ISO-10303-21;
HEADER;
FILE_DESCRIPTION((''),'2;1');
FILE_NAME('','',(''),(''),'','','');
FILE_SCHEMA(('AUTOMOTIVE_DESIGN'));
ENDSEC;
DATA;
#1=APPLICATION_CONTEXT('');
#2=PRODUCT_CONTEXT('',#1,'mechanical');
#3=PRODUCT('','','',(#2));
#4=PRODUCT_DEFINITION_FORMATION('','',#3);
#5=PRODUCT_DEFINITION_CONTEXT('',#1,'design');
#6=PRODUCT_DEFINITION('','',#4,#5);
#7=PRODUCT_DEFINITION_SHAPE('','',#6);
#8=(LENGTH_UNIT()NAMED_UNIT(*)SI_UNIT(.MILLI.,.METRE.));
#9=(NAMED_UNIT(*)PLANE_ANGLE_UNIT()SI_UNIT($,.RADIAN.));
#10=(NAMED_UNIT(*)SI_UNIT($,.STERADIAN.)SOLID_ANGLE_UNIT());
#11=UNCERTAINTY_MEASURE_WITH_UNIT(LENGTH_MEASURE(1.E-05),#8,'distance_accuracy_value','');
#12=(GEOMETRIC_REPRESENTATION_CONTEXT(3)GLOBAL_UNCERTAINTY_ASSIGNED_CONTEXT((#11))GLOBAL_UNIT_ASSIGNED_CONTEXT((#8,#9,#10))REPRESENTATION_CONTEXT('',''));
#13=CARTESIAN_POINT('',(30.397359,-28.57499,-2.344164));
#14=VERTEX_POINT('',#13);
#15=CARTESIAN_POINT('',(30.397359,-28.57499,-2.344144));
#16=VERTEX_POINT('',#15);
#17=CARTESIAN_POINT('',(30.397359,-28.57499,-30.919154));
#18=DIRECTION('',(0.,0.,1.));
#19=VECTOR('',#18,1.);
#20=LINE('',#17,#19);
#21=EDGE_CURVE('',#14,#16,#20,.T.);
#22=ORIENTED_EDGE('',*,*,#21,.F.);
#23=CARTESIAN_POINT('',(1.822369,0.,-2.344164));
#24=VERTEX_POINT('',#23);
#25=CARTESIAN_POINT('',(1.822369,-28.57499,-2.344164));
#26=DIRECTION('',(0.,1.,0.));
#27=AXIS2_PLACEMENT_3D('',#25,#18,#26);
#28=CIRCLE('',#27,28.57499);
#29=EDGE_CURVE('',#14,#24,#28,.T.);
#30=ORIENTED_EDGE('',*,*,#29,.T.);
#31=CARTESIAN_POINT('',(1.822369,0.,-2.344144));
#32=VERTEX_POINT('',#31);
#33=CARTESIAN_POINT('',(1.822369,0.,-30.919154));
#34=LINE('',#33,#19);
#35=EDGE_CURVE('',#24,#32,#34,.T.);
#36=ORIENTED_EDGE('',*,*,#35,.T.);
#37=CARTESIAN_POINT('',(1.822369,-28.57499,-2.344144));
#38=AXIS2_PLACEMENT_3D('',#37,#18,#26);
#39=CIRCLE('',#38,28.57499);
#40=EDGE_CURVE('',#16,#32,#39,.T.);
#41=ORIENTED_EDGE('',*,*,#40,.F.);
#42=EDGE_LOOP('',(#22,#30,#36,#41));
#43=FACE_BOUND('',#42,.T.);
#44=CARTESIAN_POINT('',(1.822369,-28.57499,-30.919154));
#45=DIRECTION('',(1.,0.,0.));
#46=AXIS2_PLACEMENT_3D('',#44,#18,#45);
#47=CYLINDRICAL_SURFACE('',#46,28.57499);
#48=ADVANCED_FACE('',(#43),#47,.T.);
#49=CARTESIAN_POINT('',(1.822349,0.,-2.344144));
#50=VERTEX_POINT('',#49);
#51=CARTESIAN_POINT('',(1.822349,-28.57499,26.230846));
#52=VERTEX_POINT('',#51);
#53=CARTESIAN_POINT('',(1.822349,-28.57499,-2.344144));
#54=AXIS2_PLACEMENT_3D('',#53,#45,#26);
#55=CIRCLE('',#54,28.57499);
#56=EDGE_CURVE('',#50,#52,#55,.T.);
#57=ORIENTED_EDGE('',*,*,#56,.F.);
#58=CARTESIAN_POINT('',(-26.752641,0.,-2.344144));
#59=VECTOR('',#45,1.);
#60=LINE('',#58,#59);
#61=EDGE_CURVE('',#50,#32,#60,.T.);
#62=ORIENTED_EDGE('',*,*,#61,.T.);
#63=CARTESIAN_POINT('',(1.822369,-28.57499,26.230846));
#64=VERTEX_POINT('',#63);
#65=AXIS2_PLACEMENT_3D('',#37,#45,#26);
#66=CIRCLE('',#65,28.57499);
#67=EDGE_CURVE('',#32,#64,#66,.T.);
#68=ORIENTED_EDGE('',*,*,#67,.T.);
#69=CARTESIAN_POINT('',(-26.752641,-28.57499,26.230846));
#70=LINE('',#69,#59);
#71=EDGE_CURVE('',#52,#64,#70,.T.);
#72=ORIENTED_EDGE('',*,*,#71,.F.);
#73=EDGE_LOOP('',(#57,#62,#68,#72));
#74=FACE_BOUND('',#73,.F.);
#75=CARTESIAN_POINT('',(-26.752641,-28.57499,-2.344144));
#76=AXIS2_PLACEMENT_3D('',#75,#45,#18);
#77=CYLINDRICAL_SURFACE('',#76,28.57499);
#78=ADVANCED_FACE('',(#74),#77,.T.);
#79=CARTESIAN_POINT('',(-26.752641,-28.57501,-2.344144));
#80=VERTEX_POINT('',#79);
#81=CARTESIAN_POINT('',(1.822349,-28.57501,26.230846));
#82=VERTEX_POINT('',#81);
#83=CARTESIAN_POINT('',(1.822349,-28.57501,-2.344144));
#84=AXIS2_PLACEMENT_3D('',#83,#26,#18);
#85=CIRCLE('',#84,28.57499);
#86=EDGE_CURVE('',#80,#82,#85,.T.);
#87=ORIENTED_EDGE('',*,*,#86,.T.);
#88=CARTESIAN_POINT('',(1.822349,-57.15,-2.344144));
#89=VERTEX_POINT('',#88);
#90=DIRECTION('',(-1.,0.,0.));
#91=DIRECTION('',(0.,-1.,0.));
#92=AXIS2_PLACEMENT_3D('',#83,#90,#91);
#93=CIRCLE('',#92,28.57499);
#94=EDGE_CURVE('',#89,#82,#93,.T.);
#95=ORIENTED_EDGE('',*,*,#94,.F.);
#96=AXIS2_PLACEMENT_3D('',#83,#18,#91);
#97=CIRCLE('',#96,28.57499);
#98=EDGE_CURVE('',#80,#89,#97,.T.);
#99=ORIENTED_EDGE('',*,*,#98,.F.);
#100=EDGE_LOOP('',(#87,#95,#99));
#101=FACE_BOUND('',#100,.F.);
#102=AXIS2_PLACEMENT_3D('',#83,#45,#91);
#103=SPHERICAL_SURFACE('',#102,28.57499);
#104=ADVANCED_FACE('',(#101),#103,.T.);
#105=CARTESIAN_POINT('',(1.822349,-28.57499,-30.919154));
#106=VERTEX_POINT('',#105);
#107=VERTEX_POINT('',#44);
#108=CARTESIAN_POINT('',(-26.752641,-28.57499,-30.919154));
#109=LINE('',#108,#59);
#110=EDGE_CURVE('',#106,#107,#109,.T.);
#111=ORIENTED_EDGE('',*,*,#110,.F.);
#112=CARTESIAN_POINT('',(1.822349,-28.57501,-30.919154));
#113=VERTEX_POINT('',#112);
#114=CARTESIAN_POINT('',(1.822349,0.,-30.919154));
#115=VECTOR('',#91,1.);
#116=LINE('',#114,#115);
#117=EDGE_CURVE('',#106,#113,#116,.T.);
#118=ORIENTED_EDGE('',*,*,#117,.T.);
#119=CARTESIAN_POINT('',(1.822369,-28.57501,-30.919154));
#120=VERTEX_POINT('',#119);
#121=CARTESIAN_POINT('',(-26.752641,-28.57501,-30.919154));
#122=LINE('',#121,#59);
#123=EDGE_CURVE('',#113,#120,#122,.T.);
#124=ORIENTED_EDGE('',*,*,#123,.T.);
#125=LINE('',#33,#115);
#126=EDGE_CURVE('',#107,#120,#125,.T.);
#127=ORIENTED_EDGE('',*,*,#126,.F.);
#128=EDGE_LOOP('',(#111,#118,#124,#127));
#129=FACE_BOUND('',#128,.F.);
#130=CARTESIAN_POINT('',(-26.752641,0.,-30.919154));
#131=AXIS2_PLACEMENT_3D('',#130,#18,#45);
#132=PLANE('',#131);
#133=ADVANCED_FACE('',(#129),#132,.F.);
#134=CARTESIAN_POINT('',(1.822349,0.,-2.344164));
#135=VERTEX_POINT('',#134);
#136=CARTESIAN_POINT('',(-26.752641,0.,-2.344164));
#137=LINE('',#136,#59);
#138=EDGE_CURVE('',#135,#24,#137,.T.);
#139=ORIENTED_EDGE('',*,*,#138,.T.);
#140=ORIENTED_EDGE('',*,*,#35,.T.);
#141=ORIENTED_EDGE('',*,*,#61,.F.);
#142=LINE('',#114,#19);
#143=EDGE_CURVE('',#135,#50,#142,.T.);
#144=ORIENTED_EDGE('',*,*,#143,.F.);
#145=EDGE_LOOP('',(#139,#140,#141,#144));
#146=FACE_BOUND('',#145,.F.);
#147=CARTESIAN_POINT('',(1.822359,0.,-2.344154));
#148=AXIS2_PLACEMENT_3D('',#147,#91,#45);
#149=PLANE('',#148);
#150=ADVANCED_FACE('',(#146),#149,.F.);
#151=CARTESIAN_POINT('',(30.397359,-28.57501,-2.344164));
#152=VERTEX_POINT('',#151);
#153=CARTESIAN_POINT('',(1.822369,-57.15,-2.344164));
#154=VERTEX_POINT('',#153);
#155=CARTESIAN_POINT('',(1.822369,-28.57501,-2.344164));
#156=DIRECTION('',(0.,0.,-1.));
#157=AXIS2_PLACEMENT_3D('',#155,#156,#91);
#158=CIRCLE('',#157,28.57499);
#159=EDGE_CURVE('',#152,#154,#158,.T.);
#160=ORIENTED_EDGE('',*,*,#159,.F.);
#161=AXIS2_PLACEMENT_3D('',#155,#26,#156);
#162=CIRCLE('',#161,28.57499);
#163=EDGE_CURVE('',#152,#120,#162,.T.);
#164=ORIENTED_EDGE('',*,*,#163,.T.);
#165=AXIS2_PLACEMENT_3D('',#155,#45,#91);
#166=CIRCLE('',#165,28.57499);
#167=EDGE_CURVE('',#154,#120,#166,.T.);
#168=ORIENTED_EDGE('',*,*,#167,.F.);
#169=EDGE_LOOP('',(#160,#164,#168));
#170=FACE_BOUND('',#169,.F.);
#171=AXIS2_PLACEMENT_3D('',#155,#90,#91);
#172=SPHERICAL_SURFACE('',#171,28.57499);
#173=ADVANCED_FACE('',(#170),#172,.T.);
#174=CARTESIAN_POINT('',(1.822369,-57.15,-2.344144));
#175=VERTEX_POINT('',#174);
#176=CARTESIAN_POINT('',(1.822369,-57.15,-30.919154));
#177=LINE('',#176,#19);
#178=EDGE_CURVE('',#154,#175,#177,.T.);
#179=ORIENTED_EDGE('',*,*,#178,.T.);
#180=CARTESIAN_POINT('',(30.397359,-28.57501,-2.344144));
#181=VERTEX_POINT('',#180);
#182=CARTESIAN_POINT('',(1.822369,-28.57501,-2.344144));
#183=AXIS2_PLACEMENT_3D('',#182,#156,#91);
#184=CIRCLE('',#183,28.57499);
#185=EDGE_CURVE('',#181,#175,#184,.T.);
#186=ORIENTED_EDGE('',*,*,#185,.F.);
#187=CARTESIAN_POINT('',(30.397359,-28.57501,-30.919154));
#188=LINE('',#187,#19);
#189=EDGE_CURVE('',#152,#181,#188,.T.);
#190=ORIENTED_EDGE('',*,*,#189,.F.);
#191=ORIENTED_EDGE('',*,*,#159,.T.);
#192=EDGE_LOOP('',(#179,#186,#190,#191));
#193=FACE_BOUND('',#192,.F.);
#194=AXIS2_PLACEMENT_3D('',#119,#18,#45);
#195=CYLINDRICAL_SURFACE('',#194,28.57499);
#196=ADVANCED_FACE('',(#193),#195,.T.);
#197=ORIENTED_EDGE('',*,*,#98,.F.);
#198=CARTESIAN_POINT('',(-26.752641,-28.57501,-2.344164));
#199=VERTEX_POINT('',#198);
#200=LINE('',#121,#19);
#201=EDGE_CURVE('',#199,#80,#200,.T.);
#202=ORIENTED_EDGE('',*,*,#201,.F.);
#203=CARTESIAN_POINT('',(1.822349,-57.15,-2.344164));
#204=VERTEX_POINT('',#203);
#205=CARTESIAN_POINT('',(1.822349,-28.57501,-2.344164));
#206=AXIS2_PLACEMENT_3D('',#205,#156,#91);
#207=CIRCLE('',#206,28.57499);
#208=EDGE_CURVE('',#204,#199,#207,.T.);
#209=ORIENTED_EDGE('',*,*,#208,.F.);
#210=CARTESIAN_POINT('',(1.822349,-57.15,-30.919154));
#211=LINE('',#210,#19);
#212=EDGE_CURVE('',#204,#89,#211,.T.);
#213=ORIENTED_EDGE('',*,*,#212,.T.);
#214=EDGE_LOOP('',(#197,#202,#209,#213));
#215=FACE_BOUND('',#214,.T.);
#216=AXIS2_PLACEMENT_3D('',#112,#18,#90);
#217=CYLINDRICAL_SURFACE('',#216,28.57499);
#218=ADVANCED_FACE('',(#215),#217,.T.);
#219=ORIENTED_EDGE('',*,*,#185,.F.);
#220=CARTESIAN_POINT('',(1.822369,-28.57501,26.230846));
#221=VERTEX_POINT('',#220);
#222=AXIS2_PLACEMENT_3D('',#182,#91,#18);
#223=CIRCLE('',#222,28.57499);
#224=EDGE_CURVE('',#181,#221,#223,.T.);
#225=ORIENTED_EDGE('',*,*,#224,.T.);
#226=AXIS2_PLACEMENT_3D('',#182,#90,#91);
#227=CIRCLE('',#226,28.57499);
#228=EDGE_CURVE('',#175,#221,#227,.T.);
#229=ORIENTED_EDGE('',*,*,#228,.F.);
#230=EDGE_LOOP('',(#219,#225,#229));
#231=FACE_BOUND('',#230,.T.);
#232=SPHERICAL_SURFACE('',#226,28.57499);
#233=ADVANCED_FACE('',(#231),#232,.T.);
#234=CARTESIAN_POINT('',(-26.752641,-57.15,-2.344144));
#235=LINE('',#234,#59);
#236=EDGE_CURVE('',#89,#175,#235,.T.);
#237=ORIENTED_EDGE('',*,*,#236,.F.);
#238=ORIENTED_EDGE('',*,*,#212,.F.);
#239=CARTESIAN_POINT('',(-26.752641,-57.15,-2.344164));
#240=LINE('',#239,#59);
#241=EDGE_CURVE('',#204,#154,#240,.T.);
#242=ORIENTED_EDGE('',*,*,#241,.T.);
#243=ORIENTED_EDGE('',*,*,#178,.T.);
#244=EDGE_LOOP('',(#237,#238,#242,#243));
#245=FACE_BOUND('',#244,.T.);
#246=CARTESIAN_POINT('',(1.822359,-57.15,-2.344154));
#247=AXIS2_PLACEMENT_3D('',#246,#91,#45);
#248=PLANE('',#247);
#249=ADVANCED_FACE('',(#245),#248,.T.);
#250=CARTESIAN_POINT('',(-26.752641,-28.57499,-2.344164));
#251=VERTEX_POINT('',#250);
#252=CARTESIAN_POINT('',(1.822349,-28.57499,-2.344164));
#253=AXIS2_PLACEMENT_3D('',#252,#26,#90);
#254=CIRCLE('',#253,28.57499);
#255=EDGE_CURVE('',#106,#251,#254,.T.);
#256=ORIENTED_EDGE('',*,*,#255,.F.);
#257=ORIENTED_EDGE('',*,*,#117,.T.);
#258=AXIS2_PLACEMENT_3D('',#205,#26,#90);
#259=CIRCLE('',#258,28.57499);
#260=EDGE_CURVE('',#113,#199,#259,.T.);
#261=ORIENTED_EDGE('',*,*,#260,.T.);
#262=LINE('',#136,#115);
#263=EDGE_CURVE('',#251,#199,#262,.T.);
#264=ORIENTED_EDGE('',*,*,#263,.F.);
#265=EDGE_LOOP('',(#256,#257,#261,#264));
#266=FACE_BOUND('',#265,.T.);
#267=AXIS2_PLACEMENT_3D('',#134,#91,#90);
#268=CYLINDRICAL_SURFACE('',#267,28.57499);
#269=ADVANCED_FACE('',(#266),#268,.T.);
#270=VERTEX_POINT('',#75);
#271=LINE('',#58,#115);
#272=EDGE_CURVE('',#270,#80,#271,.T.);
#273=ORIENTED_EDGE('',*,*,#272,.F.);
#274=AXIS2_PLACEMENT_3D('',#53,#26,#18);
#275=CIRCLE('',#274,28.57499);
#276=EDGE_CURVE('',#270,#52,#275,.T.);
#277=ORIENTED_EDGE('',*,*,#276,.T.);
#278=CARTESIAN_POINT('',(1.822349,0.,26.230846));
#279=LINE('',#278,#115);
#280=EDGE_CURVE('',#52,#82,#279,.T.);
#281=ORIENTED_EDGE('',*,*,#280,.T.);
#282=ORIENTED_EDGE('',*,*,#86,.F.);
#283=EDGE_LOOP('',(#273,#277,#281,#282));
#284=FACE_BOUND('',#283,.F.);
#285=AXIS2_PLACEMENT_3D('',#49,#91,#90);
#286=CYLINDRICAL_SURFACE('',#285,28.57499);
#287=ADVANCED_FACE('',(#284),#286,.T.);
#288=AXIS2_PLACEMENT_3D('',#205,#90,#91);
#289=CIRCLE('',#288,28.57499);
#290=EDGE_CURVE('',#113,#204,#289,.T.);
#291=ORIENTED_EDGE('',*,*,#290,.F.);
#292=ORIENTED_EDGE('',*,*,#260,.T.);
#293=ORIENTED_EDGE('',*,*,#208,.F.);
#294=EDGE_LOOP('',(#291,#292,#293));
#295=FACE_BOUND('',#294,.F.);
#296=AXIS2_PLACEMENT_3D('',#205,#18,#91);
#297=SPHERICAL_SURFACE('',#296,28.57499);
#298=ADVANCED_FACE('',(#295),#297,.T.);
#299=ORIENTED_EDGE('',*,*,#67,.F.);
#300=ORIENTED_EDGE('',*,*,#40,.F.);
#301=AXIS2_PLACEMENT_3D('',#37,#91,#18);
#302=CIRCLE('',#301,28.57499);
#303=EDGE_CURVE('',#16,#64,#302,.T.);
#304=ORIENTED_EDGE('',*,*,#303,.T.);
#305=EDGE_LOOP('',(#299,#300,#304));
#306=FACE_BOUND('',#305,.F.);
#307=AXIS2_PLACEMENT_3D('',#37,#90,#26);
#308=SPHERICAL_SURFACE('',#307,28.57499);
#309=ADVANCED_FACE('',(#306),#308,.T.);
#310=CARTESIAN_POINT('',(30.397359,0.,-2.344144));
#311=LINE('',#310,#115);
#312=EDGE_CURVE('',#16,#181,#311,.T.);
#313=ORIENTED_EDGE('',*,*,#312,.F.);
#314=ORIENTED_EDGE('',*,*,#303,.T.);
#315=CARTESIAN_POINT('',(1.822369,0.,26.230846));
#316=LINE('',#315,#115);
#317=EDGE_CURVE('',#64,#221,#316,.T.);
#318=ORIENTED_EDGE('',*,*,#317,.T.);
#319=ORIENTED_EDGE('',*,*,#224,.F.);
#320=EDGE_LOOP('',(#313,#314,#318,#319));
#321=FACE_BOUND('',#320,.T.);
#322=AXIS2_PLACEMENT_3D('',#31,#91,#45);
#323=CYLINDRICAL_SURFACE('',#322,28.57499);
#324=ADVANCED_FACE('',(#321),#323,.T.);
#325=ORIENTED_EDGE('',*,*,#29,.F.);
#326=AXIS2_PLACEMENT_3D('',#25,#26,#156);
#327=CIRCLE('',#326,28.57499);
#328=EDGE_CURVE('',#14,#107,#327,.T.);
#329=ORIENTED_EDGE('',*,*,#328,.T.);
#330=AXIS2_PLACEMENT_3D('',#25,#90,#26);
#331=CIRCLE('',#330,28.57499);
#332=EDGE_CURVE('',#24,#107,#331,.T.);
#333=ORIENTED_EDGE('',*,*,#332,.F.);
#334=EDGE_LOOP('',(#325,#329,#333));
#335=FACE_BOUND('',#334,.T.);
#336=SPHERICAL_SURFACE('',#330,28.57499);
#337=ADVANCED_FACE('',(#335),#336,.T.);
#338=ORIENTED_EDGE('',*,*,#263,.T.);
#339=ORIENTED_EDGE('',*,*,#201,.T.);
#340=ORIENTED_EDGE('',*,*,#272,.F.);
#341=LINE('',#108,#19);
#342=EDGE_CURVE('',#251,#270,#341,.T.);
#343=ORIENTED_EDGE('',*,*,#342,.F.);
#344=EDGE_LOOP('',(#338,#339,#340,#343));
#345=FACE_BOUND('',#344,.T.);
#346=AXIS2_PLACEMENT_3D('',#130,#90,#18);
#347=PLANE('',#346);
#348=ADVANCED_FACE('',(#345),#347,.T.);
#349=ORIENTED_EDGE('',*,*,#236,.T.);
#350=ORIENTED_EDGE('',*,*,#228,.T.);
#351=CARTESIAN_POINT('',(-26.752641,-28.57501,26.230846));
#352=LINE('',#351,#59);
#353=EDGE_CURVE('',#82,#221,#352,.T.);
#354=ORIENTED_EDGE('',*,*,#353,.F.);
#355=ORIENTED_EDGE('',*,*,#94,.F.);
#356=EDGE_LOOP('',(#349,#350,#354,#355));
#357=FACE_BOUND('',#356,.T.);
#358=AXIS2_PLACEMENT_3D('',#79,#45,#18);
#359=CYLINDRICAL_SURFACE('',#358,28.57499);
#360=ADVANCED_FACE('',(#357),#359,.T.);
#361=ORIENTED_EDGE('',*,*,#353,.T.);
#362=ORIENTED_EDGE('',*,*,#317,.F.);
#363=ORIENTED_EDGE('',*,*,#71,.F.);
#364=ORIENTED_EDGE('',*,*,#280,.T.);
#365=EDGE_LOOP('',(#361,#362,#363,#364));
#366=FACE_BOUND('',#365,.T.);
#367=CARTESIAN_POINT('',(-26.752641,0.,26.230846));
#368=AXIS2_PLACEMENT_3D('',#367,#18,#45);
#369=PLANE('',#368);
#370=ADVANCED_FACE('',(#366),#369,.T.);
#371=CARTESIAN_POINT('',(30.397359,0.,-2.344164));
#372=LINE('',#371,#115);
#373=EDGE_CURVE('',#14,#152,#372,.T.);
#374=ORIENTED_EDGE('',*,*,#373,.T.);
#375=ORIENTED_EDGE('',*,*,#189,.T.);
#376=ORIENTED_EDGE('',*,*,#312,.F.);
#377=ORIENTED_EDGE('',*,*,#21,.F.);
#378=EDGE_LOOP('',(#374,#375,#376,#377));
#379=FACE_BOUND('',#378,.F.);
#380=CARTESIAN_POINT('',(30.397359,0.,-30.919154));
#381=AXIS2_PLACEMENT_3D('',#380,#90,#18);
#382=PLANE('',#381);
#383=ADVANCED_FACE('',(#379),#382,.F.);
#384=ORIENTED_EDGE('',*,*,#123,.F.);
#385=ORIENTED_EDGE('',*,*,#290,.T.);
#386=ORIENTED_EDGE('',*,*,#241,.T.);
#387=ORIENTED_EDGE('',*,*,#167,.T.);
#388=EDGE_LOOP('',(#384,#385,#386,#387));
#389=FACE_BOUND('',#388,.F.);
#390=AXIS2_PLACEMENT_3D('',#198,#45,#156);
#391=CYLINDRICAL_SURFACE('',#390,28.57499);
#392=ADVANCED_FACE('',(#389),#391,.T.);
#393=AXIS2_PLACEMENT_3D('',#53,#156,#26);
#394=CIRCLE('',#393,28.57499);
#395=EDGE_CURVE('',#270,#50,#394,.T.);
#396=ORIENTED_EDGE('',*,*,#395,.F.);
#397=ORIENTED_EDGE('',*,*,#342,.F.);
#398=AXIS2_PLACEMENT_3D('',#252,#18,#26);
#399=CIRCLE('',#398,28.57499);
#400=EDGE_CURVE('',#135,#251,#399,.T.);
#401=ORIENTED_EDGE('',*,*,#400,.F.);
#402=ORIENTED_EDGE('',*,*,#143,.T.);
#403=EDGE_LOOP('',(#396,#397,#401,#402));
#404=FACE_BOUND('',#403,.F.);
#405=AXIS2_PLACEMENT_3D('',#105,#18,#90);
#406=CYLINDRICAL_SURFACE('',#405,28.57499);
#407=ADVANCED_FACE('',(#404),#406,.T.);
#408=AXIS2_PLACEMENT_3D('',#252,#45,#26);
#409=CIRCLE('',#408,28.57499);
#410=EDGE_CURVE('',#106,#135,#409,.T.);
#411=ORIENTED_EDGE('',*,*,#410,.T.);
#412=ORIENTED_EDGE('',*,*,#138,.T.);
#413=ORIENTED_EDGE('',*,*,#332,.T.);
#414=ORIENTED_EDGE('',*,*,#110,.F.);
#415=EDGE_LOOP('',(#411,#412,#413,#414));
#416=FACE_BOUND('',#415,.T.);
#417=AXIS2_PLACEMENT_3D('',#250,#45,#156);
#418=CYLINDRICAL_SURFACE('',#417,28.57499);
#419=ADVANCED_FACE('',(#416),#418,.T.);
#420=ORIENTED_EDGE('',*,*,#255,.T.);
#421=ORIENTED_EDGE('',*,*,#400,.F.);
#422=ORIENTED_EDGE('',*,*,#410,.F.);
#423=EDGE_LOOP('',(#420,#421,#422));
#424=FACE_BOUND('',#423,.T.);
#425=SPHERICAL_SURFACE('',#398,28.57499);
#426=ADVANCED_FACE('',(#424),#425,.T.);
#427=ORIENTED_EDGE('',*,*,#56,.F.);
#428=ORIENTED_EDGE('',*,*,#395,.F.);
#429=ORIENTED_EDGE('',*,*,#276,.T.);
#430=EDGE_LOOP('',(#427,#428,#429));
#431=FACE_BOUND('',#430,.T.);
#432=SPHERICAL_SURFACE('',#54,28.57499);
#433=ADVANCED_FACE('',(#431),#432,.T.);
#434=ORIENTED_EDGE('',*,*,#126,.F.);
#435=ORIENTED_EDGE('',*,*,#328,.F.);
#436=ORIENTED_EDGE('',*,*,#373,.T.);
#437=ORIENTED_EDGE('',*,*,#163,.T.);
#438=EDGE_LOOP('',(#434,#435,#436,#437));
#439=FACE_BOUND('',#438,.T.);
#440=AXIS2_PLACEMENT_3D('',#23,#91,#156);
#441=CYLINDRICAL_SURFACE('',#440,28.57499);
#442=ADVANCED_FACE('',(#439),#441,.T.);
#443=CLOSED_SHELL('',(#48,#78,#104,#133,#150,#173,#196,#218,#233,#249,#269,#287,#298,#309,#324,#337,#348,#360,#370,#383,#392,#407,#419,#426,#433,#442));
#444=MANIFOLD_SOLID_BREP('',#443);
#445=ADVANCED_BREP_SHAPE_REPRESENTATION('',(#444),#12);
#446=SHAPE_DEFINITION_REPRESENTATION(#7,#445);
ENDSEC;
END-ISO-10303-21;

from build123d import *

# Parameters (mm, degrees)
F1_W     = 57.15
F1_H     = 57.15
F2_DEPTH = 57.15
F3_R     = 28.57499


# Not quite as in the source:
# - a fillet or chamfer is up to 0.001 mm smaller than in the source, because OpenCascade refuses the exact size


with BuildPart() as f2:
    # F1 (on Front) → F2 (new body)
    with BuildSketch(Plane.XZ):
        with Locations((1.8223590608, -2.3441536301)):
            Rectangle(F1_W, F1_H)
    extrude(amount=F2_DEPTH)

    # F3 (radius 28.575 in the source; OpenCascade refuses exactly that, so slightly less here)
    f3_edges = [f2.edges().sort_by_distance(p)[0] for p in [
        (1.822359, -57.15, 26.230846),
        (-26.752641, -57.15, -2.344154),
        (1.822359, -57.15, -30.919154),
        (30.397359, -57.15, -2.344154),
        (1.822359, 0, 26.230846),
        (-26.752641, 0, -2.344154),
        (1.822359, 0, -30.919154),
        (30.397359, 0, -2.344154),
        (-26.752641, -28.575, -30.919154),
        (30.397359, -28.575, -30.919154),
        (30.397359, -28.575, 26.230846),
        (-26.752641, -28.575, 26.230846),
    ]]
    fillet(f3_edges, radius=F3_R)


solid = f2.part
